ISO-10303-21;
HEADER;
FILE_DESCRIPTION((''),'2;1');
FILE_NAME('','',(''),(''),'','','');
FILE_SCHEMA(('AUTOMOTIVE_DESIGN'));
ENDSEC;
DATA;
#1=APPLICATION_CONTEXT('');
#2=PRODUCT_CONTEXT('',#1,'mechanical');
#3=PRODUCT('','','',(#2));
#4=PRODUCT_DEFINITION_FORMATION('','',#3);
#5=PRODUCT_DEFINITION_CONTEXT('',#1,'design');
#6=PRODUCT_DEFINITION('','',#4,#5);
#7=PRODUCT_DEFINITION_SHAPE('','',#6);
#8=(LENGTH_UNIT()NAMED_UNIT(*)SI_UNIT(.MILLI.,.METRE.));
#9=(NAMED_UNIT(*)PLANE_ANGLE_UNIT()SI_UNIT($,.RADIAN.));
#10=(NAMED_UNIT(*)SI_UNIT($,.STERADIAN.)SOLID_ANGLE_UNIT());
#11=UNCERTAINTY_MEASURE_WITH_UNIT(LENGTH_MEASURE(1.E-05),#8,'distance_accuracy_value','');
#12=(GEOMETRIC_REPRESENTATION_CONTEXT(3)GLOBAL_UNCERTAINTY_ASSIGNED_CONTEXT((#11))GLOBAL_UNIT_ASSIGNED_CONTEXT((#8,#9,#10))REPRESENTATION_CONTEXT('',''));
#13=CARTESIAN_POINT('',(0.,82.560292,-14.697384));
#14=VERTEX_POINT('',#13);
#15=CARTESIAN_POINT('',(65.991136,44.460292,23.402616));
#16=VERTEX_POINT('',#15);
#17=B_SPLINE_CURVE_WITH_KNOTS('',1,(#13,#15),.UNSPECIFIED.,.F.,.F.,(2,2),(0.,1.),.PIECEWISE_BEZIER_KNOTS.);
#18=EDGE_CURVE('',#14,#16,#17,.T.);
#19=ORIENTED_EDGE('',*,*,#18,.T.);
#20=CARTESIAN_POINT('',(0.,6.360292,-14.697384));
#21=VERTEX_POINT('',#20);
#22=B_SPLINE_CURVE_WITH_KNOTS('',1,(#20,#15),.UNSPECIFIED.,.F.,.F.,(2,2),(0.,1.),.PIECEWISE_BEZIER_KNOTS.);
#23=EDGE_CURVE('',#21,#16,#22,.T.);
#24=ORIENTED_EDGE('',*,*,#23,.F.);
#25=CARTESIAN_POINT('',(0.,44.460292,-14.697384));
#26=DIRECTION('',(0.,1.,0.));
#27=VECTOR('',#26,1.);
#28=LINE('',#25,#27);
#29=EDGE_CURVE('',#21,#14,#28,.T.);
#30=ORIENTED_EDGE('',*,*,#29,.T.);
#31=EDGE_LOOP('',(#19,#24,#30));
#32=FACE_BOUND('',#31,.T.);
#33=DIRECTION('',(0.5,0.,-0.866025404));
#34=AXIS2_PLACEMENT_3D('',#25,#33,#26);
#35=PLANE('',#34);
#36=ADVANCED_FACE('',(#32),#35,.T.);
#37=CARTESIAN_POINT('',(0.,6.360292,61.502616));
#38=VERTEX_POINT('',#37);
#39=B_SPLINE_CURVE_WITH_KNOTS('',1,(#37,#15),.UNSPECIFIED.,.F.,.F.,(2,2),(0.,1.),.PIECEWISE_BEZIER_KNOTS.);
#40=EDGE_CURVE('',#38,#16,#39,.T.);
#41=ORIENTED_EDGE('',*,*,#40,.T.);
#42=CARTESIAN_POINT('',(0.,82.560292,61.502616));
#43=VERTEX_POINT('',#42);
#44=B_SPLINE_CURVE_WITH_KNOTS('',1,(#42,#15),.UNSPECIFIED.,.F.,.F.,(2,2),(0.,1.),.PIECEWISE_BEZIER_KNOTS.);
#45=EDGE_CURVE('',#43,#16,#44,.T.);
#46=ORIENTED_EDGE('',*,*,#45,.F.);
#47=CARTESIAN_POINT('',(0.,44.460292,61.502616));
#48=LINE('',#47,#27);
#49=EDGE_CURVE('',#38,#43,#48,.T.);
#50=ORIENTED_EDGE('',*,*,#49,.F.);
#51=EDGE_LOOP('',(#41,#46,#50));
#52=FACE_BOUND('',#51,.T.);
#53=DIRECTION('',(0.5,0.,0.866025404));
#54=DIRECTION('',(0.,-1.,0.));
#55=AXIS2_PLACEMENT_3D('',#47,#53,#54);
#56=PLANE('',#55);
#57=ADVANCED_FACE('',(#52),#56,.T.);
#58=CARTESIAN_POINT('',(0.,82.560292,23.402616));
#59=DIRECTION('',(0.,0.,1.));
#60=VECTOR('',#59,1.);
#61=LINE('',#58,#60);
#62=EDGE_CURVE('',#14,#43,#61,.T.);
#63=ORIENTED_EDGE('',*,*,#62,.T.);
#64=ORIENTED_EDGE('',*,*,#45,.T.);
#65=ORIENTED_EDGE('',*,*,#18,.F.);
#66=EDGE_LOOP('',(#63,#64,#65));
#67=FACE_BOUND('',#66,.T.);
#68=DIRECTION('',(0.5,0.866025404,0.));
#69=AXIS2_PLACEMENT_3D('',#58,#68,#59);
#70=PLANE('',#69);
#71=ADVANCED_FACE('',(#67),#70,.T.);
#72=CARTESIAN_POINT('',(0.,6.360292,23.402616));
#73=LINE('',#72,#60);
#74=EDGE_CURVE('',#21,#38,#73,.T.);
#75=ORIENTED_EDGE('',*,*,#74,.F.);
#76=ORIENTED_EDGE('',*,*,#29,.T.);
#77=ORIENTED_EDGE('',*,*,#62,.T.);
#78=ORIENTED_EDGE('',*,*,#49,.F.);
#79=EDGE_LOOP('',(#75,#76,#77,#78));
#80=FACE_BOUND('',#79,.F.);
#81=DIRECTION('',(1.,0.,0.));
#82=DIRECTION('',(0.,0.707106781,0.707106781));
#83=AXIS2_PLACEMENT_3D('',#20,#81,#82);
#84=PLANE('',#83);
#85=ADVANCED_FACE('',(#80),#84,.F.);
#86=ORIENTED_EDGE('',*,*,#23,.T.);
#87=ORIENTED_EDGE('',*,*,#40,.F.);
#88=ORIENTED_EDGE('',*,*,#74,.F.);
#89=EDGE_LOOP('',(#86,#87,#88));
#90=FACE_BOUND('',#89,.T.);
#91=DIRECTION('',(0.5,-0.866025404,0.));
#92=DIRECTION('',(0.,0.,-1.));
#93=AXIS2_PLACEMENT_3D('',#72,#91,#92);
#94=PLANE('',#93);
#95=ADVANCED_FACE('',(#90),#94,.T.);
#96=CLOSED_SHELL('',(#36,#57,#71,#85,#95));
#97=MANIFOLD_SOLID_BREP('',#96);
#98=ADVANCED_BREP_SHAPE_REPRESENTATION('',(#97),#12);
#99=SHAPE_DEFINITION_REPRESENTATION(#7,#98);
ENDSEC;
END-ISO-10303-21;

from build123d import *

# Parameters (mm, degrees)
F0_W = 76.2
F0_H = 76.2


# Not quite as in the source:
# - an extrude whose draft closes it to a point is written as a loft to that point


with BuildPart() as f1:
    # F0 (on Right) → F1 section 0
    with BuildSketch(Plane.YZ, mode=Mode.PRIVATE) as f1_s0:
        with Locations((44.4602915034, 23.4026159108)):
            Rectangle(F0_W, F0_H)
    loft([f1_s0.sketch, Vertex(65.9911357684, 44.4602915034, 23.4026159108)], ruled=True)


solid = f1.part
